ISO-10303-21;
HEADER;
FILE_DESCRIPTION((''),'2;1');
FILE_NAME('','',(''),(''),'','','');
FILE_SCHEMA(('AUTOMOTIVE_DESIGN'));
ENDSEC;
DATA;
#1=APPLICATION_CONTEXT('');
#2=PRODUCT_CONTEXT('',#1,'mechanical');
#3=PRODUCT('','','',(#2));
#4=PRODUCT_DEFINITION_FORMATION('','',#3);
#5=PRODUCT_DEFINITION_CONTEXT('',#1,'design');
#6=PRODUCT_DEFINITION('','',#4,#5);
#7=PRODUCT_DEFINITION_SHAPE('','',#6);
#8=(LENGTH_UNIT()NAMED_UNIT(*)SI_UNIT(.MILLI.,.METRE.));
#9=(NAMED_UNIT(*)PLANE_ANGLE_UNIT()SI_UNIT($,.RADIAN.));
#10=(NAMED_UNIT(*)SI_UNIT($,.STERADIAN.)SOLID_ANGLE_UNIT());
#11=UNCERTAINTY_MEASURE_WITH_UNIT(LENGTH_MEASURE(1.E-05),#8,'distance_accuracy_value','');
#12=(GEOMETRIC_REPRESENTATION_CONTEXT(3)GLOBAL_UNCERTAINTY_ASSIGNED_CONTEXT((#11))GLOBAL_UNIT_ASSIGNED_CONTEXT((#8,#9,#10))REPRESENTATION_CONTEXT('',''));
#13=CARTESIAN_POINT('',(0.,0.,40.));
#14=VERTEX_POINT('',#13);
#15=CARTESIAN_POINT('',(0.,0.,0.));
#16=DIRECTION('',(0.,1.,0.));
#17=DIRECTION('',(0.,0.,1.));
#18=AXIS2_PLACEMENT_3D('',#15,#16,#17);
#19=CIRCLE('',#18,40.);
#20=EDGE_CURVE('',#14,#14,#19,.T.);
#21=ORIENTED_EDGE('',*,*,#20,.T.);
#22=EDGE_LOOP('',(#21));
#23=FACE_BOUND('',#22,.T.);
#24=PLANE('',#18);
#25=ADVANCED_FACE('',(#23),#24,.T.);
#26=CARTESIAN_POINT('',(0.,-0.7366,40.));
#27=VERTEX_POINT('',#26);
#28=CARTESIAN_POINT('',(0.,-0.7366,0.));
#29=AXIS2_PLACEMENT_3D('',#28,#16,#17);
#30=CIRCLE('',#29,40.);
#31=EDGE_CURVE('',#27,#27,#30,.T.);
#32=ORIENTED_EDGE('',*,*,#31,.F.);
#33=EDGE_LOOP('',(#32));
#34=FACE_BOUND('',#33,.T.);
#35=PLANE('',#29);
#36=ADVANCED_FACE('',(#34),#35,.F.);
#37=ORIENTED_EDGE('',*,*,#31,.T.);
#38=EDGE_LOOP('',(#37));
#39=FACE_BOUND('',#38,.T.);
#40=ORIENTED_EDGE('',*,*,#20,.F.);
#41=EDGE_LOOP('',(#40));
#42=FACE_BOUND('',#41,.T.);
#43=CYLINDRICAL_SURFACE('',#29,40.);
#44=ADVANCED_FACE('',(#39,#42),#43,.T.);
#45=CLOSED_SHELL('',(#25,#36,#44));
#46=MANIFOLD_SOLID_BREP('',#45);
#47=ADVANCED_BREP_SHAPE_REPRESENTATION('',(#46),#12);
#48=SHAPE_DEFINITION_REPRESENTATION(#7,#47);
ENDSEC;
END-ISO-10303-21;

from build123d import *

# Parameters (mm, degrees)
SKETCH1_R          = 40
BASE_FLANGE1_DEPTH = 0.7366


# Sheet-metal steps are written as plain solids
with BuildPart() as part:
    # Sketch1 → Base-Flange1 (new body)
    with BuildSketch(Plane(origin=(0, 0, 0), x_dir=(1, 0, 0), z_dir=(0, 1, 0))):
        with Locations(Location((0, 0, 0), (0, 0, 270))):
            Circle(SKETCH1_R)
    extrude(amount=-BASE_FLANGE1_DEPTH)


solid = part.part
